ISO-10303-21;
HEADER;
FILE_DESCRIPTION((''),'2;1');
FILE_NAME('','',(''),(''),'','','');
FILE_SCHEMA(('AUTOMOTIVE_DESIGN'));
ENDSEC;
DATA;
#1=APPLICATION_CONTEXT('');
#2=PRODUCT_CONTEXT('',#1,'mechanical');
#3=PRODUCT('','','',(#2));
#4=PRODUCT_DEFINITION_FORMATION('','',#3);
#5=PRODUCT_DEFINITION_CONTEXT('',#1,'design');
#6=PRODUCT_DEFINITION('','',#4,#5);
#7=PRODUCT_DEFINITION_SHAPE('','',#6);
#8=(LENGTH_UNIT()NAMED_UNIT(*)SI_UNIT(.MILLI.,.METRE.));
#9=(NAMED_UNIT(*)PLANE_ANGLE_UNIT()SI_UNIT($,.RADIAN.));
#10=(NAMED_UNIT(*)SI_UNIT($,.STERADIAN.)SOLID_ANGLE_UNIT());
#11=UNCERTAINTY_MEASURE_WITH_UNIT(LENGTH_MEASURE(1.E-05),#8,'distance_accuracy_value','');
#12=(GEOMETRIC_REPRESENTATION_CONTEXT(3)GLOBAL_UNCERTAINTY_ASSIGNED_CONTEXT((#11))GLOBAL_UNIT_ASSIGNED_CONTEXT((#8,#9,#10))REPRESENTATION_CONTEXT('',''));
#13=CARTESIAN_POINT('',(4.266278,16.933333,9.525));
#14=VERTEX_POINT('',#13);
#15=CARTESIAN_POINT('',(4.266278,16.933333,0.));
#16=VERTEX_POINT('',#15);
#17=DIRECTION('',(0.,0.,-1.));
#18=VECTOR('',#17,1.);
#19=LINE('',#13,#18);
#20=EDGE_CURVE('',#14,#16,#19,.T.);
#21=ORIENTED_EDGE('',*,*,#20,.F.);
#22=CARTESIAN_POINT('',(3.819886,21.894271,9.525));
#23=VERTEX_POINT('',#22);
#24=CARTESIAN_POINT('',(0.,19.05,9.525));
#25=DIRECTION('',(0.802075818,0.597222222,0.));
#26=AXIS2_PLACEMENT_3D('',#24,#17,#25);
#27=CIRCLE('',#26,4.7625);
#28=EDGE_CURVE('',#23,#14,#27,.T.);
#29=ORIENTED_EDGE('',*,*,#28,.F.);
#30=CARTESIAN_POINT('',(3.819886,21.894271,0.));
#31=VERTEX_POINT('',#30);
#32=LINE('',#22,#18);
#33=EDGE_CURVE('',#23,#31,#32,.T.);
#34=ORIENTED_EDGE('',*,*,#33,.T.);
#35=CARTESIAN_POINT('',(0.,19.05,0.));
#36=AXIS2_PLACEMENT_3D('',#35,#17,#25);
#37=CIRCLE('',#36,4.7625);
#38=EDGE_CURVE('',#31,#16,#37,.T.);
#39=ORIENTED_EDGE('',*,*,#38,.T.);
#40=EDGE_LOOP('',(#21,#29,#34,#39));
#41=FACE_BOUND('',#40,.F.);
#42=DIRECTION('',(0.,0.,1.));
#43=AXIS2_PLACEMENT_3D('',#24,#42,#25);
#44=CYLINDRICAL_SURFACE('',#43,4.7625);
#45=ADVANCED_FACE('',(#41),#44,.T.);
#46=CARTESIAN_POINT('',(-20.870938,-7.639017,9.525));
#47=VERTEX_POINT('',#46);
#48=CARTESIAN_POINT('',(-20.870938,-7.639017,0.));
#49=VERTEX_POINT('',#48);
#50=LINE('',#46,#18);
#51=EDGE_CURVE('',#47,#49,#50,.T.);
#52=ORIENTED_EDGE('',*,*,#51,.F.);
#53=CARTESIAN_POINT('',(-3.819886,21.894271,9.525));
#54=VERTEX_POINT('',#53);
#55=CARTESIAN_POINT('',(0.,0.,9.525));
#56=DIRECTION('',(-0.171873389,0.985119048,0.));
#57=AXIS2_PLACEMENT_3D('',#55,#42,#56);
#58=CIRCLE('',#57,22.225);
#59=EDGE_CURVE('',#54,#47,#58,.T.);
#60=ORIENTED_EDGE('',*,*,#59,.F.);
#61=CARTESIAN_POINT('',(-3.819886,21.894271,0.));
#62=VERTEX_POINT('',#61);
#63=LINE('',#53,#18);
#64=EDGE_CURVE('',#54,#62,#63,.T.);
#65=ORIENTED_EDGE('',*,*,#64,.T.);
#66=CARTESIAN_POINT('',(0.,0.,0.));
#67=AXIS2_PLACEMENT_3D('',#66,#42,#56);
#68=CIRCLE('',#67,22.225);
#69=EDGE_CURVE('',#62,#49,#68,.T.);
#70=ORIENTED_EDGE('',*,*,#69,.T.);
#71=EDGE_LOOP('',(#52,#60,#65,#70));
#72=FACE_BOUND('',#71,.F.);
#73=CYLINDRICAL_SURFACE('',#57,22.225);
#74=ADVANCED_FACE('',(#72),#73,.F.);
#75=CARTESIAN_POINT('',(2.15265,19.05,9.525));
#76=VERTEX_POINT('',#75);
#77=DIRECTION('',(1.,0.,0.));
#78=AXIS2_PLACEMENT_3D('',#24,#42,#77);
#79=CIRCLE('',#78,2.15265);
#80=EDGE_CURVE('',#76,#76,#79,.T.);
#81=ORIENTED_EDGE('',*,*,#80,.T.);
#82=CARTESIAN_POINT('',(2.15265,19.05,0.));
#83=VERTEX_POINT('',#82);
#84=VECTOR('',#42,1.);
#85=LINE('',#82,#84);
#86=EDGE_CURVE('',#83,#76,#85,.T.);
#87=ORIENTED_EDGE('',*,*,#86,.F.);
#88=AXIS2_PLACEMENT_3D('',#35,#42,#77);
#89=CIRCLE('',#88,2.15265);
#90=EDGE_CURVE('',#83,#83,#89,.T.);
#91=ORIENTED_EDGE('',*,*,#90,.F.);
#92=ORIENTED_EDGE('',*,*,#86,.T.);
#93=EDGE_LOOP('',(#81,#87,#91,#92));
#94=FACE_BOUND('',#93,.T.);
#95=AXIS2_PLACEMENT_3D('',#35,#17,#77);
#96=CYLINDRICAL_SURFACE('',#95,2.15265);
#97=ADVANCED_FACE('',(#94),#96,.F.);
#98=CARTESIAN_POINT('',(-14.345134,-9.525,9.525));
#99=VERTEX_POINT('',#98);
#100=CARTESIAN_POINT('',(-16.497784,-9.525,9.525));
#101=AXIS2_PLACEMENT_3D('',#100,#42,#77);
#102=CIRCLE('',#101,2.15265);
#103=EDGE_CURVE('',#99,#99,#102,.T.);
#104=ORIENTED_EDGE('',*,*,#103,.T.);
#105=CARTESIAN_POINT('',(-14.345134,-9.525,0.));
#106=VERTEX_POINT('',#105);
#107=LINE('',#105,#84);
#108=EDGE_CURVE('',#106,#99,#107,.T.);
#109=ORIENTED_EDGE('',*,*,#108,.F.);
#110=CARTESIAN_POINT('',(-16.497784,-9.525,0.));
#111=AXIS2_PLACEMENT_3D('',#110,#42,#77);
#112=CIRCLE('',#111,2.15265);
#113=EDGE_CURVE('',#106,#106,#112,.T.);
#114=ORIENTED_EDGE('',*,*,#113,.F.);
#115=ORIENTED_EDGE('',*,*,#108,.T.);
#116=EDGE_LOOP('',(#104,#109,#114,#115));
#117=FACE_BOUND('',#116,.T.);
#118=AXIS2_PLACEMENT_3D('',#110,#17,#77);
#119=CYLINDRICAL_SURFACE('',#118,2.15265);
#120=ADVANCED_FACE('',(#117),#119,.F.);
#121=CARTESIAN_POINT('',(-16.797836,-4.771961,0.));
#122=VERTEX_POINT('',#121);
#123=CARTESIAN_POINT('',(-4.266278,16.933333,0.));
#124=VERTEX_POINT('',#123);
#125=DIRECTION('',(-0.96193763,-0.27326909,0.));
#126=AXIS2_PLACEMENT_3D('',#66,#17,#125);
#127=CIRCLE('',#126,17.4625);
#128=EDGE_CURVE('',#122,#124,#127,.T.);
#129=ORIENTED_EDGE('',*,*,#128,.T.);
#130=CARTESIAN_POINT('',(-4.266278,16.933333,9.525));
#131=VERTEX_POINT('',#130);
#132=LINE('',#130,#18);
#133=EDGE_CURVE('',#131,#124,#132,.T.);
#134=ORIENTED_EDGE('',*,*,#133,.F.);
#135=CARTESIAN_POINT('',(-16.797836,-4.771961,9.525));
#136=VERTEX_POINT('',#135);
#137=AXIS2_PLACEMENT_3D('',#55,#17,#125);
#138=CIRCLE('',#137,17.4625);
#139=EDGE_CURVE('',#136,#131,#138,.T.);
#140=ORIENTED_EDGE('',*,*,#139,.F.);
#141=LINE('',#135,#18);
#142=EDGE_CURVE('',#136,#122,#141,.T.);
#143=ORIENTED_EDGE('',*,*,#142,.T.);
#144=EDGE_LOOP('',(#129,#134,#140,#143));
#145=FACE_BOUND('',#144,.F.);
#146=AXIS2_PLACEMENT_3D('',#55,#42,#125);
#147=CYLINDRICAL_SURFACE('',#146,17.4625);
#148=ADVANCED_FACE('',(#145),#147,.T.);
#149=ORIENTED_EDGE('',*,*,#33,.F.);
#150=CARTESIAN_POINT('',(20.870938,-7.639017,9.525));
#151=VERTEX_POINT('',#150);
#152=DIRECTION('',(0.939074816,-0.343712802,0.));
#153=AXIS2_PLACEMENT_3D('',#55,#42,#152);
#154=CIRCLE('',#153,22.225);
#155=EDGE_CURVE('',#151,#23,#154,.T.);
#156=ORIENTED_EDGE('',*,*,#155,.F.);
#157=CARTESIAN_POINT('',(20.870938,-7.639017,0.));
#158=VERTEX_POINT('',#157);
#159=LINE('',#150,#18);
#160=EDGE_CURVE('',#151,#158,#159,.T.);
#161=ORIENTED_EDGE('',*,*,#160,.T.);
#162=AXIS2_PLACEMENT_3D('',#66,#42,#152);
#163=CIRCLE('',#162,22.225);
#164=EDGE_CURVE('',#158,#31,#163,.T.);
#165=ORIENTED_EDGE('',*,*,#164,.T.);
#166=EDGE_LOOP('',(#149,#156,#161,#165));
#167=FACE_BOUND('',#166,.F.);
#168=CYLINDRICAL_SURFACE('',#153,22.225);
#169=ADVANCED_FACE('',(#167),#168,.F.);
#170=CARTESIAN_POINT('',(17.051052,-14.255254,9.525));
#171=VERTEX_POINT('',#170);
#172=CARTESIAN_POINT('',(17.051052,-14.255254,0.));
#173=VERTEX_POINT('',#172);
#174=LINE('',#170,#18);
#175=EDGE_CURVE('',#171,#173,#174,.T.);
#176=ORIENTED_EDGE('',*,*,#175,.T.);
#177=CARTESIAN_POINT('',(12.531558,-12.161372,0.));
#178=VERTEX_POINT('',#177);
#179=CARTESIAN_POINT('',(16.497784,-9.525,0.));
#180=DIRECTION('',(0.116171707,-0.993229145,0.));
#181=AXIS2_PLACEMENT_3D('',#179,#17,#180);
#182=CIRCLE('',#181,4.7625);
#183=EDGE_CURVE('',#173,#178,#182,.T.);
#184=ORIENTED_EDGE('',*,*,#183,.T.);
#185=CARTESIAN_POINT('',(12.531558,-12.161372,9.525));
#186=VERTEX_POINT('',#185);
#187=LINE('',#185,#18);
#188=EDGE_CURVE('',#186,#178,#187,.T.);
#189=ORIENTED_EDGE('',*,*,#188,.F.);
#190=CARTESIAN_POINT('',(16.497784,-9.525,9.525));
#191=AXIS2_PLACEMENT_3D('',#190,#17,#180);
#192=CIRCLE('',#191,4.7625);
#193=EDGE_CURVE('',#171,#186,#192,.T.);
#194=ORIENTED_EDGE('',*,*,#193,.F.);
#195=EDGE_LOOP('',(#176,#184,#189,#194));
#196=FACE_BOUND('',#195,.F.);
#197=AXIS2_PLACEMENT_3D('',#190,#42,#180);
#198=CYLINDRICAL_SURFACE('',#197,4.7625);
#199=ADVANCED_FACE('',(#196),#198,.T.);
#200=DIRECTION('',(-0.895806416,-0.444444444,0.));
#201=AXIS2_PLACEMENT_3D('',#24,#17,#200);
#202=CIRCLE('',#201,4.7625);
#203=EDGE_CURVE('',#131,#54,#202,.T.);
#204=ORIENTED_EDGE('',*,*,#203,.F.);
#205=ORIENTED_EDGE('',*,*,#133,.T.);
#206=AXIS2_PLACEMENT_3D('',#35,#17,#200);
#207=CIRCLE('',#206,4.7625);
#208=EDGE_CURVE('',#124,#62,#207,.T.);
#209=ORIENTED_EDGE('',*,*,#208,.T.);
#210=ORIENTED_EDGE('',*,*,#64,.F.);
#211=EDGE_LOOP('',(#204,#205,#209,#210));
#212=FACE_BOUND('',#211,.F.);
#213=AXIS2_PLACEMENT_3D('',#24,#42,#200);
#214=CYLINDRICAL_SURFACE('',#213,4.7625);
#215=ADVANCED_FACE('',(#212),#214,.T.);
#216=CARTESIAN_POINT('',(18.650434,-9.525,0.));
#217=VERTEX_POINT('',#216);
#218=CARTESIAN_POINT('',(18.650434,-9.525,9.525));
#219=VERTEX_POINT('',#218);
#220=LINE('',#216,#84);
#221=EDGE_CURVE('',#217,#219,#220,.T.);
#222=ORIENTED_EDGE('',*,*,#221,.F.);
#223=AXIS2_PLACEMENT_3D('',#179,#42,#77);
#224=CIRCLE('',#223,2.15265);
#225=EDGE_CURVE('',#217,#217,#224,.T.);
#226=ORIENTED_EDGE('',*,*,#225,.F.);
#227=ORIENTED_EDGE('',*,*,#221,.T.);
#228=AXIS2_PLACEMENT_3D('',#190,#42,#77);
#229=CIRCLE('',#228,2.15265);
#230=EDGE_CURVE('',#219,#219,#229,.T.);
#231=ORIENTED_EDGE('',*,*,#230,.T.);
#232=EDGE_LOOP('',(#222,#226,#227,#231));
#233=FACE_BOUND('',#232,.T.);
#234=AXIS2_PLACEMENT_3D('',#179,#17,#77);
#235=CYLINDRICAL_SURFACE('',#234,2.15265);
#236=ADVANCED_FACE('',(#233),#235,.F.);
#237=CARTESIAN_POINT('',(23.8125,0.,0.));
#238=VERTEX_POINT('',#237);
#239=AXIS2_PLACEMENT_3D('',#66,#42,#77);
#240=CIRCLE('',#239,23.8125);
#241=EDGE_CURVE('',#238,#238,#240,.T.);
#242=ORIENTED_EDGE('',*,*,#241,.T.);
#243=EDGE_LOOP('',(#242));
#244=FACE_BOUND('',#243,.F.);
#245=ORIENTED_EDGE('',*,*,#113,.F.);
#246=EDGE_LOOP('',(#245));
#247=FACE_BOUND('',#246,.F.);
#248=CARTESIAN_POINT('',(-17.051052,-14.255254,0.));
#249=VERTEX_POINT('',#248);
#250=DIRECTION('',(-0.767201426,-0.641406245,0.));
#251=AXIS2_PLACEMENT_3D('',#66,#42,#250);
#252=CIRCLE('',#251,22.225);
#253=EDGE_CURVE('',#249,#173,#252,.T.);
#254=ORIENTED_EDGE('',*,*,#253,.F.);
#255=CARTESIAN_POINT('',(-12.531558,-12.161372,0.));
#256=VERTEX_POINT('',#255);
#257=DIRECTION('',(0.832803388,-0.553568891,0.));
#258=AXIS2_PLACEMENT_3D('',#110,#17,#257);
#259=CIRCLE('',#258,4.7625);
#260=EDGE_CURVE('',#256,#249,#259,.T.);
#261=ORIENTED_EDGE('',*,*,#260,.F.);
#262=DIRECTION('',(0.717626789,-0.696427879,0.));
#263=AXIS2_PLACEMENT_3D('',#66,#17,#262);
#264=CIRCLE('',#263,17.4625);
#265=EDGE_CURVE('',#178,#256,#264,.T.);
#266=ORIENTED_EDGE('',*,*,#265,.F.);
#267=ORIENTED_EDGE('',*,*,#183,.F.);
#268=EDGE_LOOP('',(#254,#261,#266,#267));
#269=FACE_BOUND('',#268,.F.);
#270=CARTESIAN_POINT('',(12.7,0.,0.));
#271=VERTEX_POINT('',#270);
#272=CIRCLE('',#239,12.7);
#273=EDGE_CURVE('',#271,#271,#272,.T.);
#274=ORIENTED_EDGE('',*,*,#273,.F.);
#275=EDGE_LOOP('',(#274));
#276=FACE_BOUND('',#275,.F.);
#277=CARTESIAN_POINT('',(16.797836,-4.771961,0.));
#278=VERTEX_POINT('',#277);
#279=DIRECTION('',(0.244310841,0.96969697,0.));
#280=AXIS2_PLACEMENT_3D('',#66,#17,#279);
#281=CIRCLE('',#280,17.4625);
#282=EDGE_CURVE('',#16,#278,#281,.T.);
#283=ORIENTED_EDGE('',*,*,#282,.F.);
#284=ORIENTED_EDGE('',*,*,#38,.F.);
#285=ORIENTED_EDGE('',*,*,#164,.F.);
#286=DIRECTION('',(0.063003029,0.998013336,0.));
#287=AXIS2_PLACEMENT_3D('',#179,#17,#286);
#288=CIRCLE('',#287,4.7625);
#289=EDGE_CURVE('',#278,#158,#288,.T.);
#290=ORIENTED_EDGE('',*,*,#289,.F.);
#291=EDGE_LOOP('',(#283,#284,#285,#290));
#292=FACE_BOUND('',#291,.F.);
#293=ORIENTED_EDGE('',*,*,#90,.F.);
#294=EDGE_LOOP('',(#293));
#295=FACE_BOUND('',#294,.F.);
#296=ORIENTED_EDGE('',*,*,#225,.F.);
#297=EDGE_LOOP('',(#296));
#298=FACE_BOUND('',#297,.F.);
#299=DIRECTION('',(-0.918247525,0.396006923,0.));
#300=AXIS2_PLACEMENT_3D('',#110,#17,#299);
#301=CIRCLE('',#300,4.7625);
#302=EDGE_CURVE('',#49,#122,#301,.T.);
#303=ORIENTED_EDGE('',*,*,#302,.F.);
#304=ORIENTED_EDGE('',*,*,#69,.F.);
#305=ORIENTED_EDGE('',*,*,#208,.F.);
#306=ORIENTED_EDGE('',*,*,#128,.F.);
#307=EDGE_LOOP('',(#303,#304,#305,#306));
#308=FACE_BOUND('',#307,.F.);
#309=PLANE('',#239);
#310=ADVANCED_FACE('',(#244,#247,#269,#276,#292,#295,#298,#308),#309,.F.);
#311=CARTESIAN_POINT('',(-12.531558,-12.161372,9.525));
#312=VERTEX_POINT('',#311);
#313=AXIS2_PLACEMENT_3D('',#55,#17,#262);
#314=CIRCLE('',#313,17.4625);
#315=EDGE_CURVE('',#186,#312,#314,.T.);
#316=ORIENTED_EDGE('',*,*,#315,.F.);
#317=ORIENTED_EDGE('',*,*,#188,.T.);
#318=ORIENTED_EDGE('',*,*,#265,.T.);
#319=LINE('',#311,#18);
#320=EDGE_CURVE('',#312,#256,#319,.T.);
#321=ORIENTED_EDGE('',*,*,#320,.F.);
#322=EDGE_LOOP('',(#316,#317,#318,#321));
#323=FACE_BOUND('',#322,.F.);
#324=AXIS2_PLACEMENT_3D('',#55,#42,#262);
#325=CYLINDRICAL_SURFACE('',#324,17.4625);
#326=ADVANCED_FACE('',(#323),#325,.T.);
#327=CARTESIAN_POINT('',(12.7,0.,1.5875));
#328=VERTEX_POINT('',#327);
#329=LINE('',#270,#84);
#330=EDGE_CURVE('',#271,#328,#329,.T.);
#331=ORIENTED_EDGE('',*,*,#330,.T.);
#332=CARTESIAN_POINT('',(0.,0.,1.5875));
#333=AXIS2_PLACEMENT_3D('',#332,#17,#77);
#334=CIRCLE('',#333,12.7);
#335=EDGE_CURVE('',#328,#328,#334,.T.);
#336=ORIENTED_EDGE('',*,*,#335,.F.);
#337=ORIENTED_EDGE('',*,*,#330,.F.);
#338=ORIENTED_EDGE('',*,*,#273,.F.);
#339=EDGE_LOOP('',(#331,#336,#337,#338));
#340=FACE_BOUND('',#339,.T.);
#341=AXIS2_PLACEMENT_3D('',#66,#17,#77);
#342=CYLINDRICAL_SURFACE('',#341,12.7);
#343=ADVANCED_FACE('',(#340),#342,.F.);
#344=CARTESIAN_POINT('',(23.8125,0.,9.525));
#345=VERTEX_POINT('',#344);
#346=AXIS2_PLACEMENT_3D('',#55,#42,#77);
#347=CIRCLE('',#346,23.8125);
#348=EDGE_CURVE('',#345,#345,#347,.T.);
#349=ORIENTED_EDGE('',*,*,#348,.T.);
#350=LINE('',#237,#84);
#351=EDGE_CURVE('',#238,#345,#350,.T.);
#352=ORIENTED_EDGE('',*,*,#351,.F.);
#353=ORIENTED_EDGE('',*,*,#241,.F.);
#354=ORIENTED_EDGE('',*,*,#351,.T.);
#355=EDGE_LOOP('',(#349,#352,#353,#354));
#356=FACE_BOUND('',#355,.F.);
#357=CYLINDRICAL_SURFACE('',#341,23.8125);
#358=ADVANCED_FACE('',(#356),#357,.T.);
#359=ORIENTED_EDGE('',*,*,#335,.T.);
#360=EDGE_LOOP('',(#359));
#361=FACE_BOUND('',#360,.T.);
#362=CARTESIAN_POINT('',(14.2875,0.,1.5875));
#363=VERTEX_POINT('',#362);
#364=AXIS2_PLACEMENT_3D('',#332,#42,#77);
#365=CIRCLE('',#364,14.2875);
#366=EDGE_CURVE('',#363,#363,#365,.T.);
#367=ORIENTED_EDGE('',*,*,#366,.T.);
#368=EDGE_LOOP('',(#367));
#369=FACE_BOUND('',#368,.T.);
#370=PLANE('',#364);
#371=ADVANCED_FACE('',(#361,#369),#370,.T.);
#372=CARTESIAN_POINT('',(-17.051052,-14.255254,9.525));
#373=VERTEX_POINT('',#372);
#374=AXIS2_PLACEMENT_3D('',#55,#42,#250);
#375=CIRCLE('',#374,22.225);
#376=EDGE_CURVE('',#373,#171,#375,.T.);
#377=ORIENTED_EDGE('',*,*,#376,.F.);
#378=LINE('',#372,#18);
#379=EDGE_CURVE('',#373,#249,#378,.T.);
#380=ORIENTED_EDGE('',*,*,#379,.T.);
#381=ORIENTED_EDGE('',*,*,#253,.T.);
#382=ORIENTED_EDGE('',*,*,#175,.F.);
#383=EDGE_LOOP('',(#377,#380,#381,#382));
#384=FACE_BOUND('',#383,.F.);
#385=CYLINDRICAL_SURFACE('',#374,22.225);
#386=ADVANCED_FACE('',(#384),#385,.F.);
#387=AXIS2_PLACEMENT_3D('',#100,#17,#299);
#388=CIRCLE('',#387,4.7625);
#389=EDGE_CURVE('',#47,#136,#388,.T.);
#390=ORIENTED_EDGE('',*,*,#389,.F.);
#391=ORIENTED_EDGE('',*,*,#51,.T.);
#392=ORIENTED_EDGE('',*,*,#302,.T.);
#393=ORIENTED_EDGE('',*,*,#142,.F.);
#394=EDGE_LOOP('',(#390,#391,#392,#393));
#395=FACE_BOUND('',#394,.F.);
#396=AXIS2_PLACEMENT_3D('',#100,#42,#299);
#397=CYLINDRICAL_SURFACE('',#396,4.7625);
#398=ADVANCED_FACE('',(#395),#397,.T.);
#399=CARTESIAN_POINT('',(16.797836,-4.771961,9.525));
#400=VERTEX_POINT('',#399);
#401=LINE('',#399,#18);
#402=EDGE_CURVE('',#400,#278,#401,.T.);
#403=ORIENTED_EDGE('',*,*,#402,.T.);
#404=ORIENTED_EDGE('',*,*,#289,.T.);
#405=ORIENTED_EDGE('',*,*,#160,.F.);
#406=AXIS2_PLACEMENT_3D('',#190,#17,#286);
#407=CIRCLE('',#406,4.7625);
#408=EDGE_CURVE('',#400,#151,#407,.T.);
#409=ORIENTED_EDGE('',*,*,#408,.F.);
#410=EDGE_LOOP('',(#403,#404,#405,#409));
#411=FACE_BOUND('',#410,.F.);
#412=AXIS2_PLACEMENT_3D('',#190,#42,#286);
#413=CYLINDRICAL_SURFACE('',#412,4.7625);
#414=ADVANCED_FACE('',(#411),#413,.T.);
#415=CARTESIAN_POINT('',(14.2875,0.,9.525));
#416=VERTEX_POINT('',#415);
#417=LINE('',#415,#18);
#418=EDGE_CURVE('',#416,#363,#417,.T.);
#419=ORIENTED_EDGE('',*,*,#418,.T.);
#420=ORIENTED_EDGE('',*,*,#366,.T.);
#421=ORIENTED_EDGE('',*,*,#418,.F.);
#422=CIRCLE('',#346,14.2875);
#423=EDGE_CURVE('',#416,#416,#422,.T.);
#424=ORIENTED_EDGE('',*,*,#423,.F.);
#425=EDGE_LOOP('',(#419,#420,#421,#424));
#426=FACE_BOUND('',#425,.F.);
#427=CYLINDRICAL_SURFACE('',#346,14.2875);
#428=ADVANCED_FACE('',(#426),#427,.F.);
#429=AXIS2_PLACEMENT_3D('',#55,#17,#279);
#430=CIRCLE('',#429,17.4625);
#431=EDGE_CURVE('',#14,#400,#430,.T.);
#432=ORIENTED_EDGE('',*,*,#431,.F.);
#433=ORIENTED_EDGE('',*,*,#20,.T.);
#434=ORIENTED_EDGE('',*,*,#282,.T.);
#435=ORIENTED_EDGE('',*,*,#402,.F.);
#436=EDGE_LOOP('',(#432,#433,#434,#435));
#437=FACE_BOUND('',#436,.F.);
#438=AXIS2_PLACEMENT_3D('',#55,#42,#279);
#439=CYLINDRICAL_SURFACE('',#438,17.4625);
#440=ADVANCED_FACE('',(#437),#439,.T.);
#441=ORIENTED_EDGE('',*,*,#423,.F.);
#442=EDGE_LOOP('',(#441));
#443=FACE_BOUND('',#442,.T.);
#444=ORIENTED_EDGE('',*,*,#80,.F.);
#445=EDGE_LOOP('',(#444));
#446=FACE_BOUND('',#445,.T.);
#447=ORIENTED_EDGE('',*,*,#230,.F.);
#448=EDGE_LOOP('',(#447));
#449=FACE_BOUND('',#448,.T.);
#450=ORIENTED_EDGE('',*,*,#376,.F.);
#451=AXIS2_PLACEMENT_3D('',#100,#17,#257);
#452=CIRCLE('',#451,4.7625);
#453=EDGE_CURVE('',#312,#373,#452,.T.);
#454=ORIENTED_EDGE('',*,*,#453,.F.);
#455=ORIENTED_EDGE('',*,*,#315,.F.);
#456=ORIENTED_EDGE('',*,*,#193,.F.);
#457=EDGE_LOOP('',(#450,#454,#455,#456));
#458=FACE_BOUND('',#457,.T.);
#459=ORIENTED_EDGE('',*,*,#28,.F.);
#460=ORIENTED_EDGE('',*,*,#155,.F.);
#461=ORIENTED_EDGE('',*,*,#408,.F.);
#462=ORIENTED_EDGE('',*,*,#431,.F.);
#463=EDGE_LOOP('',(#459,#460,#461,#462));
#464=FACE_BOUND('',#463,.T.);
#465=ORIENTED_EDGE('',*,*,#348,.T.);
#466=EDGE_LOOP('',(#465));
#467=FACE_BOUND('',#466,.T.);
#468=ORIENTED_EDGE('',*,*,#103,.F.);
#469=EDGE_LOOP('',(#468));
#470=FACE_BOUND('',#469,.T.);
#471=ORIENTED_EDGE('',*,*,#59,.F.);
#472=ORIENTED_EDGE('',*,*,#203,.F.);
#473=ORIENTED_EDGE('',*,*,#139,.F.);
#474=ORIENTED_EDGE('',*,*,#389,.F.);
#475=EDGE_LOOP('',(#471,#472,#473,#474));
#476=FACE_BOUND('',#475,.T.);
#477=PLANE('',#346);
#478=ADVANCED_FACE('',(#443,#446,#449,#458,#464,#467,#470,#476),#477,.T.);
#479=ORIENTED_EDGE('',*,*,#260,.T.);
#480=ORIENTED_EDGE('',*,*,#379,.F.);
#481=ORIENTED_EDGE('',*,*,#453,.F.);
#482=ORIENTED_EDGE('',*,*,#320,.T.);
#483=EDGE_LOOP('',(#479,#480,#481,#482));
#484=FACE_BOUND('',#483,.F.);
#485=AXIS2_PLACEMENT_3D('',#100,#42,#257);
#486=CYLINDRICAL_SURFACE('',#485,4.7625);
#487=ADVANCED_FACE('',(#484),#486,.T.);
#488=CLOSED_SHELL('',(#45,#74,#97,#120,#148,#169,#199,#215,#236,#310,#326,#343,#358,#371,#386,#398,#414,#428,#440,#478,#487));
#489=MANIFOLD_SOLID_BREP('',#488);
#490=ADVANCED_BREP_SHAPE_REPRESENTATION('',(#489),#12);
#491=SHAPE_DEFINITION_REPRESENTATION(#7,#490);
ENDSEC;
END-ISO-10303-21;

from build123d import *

# Parameters (mm, degrees)
F0_R            = 23.8125
F0_R_2          = 2.15265
F0_R_3          = 12.7
F1_DEPTH        = 9.525
F2_R            = 14.2875
F3_DEPTH        = 7.9375
F5_DEPTH        = 9.525
F5_COPIES_COUNT = 3


# Not quite as in the source:
# - a pattern or mirror of a feature is missing from the dataset's text; its kind, count and spacing are read off the source's solid


with BuildPart() as f1:
    # F0 (on Top) → F1 (new body)
    with BuildSketch(Plane.XY):
        Circle(F0_R)
        with Locations((-16.4977839421, -9.525)):
            Circle(F0_R_2, mode=Mode.SUBTRACT)
        with Locations((16.4977839421, -9.525)):
            Circle(F0_R_2, mode=Mode.SUBTRACT)
        Circle(F0_R_3, mode=Mode.SUBTRACT)
        with Locations((0, 19.05)):
            Circle(F0_R_2, mode=Mode.SUBTRACT)
    extrude(amount=F1_DEPTH)

    # F2 (on face) → F3 (cut)
    with BuildSketch(Plane.XY.offset(9.525)):
        Circle(F2_R)
    extrude(amount=-F3_DEPTH, mode=Mode.SUBTRACT)

    # F4 (on face) → F5 (cut, through all)
    with BuildSketch(Plane.XY.offset(9.525)):
        with BuildLine():
            ThreePointArc((17.0510516982, -14.2552538029), (14.4957458217, -13.8462555599), (12.5315578082, -12.1613718449))
            ThreePointArc((12.5315578082, -12.1613718449), (0, -17.4625), (-12.5315578082, -12.1613718449))
            ThreePointArc((-12.5315578082, -12.1613718449), (-14.4957458217, -13.8462555599), (-17.0510516982, -14.2552538029))
            ThreePointArc((-17.0510516982, -14.2552538029), (0, -22.225), (17.0510516982, -14.2552538029))
        make_face()
    f5 = extrude(amount=-F5_DEPTH, mode=Mode.SUBTRACT)

    # F5_copies: F5 ×3 about axis
    f5_copies_axis = Axis((0, 0, 0), (0, 0, 1))
    for i in range(1, F5_COPIES_COUNT):
        add(f5.rotate(f5_copies_axis, i * 360 / F5_COPIES_COUNT), mode=Mode.SUBTRACT)


solid = f1.part
